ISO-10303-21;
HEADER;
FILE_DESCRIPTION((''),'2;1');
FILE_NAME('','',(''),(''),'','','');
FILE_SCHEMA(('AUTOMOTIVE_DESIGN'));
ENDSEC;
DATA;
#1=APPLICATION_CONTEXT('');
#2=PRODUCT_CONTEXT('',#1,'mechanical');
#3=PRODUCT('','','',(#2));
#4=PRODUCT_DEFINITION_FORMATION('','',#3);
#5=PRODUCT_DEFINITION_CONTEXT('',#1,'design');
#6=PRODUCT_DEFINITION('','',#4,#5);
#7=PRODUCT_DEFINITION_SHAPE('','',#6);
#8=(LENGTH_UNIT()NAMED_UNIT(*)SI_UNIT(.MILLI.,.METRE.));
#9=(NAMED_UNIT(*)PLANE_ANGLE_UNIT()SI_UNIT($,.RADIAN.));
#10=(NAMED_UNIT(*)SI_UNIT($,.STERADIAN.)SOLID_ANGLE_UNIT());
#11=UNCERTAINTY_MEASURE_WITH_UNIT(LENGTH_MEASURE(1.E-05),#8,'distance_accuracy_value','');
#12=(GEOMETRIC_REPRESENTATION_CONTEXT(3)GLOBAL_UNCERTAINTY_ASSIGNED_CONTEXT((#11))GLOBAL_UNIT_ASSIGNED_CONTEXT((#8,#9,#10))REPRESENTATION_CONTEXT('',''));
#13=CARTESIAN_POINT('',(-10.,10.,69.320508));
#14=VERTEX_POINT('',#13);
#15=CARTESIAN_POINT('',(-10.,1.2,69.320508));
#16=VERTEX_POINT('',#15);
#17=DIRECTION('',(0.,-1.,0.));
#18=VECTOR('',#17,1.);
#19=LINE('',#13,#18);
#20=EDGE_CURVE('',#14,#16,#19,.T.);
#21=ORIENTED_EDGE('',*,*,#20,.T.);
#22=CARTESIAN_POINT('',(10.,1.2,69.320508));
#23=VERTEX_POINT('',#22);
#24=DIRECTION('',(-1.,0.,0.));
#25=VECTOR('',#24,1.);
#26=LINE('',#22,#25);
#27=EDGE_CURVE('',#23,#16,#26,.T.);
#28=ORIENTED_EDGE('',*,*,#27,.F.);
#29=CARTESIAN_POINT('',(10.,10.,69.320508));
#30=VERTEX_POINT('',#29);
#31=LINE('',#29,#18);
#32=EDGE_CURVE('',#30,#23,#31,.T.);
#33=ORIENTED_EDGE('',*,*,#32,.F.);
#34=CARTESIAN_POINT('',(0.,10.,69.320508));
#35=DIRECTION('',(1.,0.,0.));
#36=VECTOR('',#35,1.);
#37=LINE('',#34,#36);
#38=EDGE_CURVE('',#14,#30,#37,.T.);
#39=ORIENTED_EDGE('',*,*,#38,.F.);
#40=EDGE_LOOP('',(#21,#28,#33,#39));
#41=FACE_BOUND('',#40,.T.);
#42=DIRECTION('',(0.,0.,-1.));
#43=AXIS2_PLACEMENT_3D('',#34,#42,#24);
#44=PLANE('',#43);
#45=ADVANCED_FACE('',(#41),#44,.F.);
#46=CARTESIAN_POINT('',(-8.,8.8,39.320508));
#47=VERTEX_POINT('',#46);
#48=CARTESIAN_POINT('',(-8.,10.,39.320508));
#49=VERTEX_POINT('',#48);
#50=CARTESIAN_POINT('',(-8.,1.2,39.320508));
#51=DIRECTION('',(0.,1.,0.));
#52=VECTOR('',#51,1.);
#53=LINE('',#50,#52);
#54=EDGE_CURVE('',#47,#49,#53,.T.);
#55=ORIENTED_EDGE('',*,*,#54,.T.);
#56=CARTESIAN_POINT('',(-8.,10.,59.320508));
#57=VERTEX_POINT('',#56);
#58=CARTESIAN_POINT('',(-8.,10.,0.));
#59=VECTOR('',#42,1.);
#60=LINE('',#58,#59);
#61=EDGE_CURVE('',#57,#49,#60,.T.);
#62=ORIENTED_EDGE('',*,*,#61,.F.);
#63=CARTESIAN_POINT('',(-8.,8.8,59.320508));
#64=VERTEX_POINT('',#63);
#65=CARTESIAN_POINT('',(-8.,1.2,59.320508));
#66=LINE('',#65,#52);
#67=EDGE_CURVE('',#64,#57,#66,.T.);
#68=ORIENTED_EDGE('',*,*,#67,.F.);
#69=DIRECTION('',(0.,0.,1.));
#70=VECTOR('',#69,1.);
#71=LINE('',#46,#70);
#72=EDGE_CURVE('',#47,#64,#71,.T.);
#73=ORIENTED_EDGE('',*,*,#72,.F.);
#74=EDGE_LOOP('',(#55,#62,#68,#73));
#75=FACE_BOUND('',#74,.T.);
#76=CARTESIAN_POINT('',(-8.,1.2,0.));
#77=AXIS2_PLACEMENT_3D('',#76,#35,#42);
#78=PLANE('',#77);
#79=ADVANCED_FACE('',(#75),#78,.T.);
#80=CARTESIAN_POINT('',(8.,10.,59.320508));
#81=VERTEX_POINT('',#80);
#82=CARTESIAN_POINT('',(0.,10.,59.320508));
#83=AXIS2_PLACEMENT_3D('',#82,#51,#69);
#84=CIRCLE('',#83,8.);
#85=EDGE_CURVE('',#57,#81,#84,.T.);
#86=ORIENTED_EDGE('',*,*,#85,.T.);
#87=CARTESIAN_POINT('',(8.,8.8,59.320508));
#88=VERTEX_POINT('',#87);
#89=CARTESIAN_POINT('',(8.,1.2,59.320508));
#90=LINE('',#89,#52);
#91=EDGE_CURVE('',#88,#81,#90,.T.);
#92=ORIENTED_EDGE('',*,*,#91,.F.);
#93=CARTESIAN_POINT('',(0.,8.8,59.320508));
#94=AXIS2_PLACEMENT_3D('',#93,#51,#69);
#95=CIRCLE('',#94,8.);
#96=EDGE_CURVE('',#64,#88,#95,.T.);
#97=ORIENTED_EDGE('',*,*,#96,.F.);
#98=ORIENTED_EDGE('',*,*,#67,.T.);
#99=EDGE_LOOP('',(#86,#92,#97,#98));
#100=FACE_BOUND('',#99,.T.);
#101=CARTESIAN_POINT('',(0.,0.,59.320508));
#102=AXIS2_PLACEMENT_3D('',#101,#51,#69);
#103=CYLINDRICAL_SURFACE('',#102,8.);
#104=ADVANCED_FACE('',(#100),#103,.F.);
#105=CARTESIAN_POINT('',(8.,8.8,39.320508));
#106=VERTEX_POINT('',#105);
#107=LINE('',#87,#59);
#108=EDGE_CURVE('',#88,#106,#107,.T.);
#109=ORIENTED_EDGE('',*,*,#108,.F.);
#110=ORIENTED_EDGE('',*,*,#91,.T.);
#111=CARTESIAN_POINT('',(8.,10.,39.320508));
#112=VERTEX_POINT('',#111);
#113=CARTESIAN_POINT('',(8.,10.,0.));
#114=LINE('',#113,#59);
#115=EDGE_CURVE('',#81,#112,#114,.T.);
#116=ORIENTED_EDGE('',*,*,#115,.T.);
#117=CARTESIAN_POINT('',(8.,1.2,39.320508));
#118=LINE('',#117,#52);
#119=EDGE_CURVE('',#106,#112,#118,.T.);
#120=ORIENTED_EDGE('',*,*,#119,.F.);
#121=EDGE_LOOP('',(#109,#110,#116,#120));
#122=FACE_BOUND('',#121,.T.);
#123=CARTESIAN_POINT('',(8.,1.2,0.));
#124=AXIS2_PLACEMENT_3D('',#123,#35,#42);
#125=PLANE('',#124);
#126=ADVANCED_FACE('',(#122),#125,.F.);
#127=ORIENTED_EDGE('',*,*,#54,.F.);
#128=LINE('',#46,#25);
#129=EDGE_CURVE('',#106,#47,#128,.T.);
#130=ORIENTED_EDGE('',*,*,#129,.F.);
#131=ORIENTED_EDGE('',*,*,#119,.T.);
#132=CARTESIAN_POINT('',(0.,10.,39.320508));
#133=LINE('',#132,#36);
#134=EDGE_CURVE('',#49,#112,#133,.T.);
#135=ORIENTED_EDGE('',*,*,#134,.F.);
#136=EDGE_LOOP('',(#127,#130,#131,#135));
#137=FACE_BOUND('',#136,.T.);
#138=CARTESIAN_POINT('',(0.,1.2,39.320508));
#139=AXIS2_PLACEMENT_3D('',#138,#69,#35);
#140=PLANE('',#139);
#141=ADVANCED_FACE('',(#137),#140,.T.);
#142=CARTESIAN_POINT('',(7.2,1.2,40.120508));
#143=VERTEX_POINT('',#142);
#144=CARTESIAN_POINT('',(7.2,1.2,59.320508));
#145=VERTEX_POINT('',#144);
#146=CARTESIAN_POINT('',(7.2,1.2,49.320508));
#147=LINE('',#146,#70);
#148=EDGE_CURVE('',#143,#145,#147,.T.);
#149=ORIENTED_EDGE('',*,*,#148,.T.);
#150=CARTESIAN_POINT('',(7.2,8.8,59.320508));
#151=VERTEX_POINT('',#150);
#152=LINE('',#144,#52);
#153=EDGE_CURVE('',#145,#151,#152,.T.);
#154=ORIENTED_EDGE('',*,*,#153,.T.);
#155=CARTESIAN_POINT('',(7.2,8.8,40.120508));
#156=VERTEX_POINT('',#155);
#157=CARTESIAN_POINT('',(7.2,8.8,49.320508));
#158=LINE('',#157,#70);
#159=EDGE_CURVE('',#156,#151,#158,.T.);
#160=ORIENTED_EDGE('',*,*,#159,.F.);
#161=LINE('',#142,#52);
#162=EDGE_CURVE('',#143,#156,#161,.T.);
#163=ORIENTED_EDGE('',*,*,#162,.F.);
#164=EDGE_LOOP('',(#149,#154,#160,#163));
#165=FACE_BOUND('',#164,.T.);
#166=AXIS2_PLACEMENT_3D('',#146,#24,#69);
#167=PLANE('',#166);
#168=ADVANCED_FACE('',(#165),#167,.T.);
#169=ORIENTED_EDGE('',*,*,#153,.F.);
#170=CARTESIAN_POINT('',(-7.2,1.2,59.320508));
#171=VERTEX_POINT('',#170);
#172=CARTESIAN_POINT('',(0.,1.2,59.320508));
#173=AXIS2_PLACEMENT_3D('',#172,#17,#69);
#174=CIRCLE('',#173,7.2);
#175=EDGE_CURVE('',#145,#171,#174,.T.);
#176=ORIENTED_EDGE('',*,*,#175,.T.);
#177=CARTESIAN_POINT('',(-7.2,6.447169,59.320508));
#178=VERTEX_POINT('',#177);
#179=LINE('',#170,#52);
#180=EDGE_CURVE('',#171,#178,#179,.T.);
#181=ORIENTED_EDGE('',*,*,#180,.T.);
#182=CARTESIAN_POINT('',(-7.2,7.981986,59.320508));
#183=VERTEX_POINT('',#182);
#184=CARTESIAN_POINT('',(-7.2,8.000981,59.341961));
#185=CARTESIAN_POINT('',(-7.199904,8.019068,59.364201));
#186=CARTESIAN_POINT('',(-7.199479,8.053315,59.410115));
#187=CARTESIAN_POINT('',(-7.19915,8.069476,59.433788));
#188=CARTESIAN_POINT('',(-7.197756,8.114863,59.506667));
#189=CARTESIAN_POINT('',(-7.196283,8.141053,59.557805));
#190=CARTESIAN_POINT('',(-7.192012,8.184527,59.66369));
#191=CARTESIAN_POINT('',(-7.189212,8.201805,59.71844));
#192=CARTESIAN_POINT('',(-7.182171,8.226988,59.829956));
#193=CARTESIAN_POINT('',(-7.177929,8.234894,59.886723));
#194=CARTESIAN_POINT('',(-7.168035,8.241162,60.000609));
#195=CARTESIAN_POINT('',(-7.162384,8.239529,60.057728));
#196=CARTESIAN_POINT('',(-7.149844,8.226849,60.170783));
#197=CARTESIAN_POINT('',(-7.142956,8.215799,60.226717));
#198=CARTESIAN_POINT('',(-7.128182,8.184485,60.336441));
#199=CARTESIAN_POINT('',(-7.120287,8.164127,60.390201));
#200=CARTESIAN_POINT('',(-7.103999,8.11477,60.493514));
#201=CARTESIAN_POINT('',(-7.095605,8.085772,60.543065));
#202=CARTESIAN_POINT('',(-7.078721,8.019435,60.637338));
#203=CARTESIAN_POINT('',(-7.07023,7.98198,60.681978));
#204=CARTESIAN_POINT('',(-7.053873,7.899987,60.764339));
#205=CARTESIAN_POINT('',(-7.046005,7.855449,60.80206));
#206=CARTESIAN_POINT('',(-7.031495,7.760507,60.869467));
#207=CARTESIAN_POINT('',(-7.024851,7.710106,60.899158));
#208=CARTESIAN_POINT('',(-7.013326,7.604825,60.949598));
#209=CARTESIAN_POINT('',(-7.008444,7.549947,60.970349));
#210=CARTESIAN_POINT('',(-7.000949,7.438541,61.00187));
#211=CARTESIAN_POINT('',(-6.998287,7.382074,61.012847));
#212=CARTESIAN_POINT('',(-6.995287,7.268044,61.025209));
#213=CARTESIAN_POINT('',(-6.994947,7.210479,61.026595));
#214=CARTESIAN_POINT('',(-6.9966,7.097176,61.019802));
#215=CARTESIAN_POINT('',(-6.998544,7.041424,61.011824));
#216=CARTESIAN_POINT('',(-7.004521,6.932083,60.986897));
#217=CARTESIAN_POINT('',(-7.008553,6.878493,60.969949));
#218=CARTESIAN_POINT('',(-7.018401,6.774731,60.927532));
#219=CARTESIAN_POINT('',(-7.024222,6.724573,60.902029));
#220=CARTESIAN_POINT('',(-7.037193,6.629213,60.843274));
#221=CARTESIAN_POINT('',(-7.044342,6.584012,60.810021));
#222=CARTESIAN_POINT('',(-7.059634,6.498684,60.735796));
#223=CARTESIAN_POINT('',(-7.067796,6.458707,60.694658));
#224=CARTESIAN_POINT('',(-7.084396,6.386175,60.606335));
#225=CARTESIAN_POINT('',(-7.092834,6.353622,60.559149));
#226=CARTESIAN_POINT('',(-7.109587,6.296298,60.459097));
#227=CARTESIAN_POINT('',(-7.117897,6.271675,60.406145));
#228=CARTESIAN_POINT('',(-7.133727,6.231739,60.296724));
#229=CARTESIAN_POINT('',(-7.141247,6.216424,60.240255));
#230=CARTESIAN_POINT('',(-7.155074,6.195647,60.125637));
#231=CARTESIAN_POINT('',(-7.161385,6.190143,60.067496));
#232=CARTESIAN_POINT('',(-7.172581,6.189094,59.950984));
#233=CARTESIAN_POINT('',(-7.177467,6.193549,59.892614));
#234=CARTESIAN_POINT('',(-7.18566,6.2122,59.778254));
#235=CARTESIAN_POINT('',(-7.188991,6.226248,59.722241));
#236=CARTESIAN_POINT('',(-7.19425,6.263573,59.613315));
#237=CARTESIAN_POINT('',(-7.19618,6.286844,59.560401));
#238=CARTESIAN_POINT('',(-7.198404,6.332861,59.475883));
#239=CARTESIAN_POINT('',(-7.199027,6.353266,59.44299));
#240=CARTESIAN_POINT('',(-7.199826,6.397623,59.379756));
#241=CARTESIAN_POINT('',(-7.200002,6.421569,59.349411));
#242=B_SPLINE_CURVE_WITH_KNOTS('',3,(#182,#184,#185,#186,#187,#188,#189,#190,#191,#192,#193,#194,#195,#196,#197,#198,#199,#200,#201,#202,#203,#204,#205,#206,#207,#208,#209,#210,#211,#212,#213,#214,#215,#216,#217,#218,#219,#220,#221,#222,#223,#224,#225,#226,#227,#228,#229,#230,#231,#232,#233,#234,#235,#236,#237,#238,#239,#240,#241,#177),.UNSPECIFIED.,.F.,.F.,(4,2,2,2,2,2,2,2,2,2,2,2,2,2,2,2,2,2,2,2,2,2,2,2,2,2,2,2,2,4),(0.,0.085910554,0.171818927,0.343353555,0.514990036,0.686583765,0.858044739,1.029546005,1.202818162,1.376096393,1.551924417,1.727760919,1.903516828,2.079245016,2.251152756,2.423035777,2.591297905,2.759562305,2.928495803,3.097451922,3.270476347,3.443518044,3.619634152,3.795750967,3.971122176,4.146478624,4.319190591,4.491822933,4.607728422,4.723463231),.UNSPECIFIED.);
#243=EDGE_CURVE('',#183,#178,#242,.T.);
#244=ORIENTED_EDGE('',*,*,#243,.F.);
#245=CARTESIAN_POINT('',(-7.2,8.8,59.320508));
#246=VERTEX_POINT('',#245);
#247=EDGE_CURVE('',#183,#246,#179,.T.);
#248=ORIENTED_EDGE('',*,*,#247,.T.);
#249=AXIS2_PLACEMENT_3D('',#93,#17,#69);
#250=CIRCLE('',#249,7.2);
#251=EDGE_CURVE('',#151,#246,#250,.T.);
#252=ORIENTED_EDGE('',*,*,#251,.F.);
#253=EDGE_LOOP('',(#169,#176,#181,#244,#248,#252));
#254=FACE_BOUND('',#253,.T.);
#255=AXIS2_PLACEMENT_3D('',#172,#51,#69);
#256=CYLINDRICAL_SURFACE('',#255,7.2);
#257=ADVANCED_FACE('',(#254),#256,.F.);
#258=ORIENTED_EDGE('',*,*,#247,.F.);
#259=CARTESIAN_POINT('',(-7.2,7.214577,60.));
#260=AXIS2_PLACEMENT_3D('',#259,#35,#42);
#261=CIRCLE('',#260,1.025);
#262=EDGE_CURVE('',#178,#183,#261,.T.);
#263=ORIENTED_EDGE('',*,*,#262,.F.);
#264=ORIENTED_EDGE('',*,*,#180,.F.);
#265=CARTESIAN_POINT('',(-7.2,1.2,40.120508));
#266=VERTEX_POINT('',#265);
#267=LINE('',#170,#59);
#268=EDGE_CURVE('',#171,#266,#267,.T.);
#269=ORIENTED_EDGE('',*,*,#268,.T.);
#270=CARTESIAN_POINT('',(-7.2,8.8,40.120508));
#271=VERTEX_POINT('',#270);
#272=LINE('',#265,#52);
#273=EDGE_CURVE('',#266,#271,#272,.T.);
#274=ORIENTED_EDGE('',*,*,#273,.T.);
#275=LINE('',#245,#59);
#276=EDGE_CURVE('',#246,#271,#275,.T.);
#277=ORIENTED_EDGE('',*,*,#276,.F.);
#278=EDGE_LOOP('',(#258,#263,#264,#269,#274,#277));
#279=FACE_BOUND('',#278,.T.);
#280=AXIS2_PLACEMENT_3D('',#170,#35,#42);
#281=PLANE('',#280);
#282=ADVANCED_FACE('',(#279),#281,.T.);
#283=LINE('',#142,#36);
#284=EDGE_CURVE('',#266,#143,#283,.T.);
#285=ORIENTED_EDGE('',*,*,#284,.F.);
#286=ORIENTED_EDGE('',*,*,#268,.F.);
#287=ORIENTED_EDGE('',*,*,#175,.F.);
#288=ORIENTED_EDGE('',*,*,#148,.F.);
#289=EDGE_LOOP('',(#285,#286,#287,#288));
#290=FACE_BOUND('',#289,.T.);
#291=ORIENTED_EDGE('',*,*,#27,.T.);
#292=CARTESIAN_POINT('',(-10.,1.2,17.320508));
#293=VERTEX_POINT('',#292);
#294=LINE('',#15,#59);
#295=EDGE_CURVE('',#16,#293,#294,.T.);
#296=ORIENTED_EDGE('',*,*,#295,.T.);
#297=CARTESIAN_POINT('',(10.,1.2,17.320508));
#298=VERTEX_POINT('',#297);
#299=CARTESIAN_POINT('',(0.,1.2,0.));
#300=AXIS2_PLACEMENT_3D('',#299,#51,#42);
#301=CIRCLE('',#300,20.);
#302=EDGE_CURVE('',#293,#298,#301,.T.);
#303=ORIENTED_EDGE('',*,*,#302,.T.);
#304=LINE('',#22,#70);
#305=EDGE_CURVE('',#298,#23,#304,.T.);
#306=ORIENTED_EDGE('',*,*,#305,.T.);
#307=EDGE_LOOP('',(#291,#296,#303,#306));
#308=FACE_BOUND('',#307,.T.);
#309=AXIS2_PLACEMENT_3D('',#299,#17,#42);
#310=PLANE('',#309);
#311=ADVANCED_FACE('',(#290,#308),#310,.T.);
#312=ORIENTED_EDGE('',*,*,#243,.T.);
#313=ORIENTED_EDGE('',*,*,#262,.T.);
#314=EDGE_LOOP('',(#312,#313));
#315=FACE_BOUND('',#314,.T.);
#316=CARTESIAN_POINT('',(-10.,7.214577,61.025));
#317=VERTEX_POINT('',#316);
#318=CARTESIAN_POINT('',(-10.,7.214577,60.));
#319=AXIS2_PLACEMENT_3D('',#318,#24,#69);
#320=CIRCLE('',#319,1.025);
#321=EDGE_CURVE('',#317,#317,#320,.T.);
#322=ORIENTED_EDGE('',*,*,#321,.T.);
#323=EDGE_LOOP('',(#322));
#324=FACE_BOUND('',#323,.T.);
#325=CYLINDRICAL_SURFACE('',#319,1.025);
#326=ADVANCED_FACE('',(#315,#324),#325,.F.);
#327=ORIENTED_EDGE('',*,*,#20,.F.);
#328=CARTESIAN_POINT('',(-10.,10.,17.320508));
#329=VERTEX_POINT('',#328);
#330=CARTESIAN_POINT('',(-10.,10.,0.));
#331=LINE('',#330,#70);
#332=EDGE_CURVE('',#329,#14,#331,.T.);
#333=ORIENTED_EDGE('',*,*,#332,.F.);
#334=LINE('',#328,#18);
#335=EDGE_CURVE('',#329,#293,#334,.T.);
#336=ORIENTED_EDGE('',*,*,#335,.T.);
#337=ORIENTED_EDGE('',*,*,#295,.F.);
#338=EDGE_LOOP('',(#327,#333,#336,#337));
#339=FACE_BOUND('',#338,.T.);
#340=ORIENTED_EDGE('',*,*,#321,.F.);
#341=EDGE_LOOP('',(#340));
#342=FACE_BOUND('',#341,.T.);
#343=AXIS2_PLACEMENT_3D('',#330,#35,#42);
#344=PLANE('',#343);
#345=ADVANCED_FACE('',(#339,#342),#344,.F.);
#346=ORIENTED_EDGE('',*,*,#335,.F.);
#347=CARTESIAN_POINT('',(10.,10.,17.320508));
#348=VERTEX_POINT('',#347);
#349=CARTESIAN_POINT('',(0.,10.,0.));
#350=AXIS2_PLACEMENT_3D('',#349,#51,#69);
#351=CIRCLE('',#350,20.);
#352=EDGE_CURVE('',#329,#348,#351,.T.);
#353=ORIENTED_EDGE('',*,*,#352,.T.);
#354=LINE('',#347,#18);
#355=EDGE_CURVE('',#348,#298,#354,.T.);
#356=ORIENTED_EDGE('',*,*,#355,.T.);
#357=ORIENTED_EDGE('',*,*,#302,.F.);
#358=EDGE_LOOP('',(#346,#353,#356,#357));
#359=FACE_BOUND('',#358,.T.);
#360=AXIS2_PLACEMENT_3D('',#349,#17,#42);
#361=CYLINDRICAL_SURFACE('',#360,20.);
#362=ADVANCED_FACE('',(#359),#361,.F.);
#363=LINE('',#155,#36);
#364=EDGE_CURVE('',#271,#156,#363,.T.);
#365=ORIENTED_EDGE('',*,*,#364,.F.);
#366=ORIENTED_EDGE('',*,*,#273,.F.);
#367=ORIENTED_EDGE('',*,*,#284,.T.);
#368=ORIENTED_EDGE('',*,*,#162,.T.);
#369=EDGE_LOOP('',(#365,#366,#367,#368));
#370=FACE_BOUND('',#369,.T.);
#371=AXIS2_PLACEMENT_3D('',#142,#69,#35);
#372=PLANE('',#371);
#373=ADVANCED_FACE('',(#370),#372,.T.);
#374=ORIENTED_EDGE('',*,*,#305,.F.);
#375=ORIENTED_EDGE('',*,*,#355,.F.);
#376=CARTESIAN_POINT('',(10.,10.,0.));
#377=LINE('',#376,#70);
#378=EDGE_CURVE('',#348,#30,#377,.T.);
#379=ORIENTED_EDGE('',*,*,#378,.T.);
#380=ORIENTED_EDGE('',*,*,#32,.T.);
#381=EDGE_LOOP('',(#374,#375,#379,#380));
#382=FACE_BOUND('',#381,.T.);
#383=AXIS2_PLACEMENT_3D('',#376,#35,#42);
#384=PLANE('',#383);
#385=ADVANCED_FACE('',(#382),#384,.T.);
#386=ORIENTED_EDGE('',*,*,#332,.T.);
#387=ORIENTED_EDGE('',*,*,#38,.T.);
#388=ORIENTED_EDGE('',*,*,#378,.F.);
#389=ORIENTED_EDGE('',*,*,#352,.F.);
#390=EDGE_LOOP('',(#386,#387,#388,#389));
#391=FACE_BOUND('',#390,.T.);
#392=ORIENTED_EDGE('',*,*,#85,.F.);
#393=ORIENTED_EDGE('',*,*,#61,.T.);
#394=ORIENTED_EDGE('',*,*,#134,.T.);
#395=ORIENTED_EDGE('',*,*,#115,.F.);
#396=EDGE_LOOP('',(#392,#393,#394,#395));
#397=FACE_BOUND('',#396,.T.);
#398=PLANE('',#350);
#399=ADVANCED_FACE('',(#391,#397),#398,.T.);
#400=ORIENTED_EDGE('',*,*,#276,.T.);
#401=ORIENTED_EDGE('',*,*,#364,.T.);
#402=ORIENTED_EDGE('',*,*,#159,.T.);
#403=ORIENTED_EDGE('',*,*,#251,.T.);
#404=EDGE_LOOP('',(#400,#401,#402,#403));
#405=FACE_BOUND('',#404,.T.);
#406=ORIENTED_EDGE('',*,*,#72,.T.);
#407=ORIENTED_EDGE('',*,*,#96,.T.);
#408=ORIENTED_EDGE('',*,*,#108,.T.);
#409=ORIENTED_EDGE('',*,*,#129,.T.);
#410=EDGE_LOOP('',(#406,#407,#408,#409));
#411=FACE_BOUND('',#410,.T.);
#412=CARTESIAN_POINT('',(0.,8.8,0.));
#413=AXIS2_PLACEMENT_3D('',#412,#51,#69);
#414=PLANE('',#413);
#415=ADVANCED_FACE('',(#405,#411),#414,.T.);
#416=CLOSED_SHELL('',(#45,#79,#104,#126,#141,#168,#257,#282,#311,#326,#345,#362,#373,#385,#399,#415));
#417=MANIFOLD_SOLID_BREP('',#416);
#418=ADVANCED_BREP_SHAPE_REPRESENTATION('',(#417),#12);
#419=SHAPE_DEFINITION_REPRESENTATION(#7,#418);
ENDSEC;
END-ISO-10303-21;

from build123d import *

# Parameters (mm, degrees)
EXTRUDE_1_DEPTH          = 10
SKETCH_2_R               = 8
CUT_EXTRUDE_1_DEPTH      = 10
EXTRUDE_START            = -1.2
SKETCH_4_R               = 8
EXTRUDE_2_DEPTH          = 1.2
CUT_EXTRUDE_4_DEPTH      = 8.8
EXTRUDE_START_2          = 1.2
EXTRUDE_3_DEPTH          = 7.6
SKETCH_6_W               = 0.8
SKETCH_6_H               = 0.8
CUT_EXTRUDE_5_DEPTH      = 0.8
CUT_EXTRUDE_6_DEPTH      = 1.2
SKETCH_8_W               = 1.6
SKETCH_8_H               = 0.8
EXTRUDE_4_DEPTH          = 0.8
HOLE_WIZARD_M2_5_2_D     = 2.05
HOLE_WIZARD_M2_5_2_DEPTH = 10
HOLE_WIZARD_M2_5_2_TIP   = 0.615882135


# Read off the part's stored shape, not the designer's step: 填料-伸長3
with BuildPart() as part:
    # 草圖1 → 填料-伸長1 (new body)
    with BuildSketch(Plane(origin=(0, 0, 0), x_dir=(1, 0, 0), z_dir=(0, 1, 0))):
        with BuildLine():
            ThreePointArc((0, -20), (-5.176380902, -19.318516526), (-10, -17.320508076))
            Line((-10, -17.320508076), (-10, -69.320508076))
            Line((-10, -69.320508076), (10, -69.320508076))
            Line((10, -69.320508076), (10, -17.320508076))
            ThreePointArc((10, -17.320508076), (5.176380902, -19.318516526), (0, -20))
        make_face()
    extrude(amount=EXTRUDE_1_DEPTH)

    # 草圖2 → 除料-伸長1 (cut)
    with BuildSketch(Plane(origin=(0, 10, 0), x_dir=(1, 0, 0), z_dir=(0, 1, 0))):
        with Locations(Location((0, -59.320508076, 0), (0, 0, 270))):
            Circle(SKETCH_2_R)
    extrude(amount=-CUT_EXTRUDE_1_DEPTH, mode=Mode.SUBTRACT)

    # 草圖4 → 填料-伸長2 (add)
    with BuildSketch(Plane.XZ.offset(EXTRUDE_START)):
        with Locations(Location((0, 59.320508076, 0), (0, 0, 90))):
            Circle(SKETCH_4_R)
    extrude(amount=EXTRUDE_2_DEPTH)

    # 草圖5 → 除料-伸長4 (cut)
    with BuildSketch(Plane(origin=(0, 10, 0), x_dir=(1, 0, 0), z_dir=(0, 1, 0))):
        with BuildLine():
            Line((-8, -39.320508076), (-8, -59.320508076))
            ThreePointArc((-8, -59.320508076), (0, -51.320508076), (8, -59.320508076))
            Line((8, -59.320508076), (8, -39.320508076))
            Line((8, -39.320508076), (-8, -39.320508076))
        make_face()
    extrude(amount=-CUT_EXTRUDE_4_DEPTH, mode=Mode.SUBTRACT)

    # 填料-伸長3 outline → 填料-伸長3 (add)
    with BuildSketch(Plane(origin=(0, 0, 0), x_dir=(1, 0, 0), z_dir=(0, 1, 0)).offset(EXTRUDE_START_2)):
        with BuildLine():
            Line((-8, -39.320508076), (-8, -59.320508076))
            ThreePointArc((-8, -59.320508076), (0, -67.320508076), (8, -59.320508076))
            Line((8, -59.320508076), (8, -39.320508076))
            Line((8, -39.320508076), (-8, -39.320508076))
        make_face()
        with BuildLine():
            ThreePointArc((7.2, -59.320508076), (0, -66.520508076), (-7.2, -59.320508076))
            Line((-7.2, -59.320508076), (-7.2, -40.120508076))
            Line((-7.2, -40.120508076), (7.2, -40.120508076))
            Line((7.2, -40.120508076), (7.2, -59.320508076))
        make_face(mode=Mode.SUBTRACT)
    extrude(amount=EXTRUDE_3_DEPTH)

    # 草圖6 → 除料-伸長5 (cut)
    with BuildSketch(Plane(origin=(0, 10, 0), x_dir=(1, 0, 0), z_dir=(0, 1, 0))):
        with Locations((0.4, -38.920508076)):
            Rectangle(SKETCH_6_W, SKETCH_6_H)
        with Locations((-0.4, -38.920508076)):
            Rectangle(SKETCH_6_W, SKETCH_6_H)
    extrude(amount=-CUT_EXTRUDE_5_DEPTH, mode=Mode.SUBTRACT)

    # 草圖7 → 除料-伸長6 (cut)
    with BuildSketch(Plane.XZ):
        with BuildLine():
            Line((10, 69.320508076), (10, 17.320508076))
            ThreePointArc((10, 17.320508076), (0, 20), (-10, 17.320508076))
            Line((-10, 17.320508076), (-10, 69.320508076))
            Line((-10, 69.320508076), (10, 69.320508076))
        make_face()
    extrude(amount=-CUT_EXTRUDE_6_DEPTH, mode=Mode.SUBTRACT)

    # 草圖8 → 填料-伸長4 (add)
    with BuildSketch(Plane(origin=(0, 10, 0), x_dir=(1, 0, 0), z_dir=(0, 1, 0))):
        with Locations((0, -38.920508076)):
            Rectangle(SKETCH_8_W, SKETCH_8_H)
    extrude(amount=-EXTRUDE_4_DEPTH)

    # M2.5  螺絲攻的螺孔鑽2
    with Locations(Plane(origin=(-10, 7.214577241, 60), x_dir=(0, 0, -1), z_dir=(-1, 0, 0))):
        with Locations((0, 0)):
            Hole(HOLE_WIZARD_M2_5_2_D / 2, depth=HOLE_WIZARD_M2_5_2_DEPTH)
            with Locations((0, 0, -(HOLE_WIZARD_M2_5_2_DEPTH + HOLE_WIZARD_M2_5_2_TIP / 2))):  # 118° drill point
                Cone(0, HOLE_WIZARD_M2_5_2_D / 2, HOLE_WIZARD_M2_5_2_TIP, mode=Mode.SUBTRACT)


solid = part.part
